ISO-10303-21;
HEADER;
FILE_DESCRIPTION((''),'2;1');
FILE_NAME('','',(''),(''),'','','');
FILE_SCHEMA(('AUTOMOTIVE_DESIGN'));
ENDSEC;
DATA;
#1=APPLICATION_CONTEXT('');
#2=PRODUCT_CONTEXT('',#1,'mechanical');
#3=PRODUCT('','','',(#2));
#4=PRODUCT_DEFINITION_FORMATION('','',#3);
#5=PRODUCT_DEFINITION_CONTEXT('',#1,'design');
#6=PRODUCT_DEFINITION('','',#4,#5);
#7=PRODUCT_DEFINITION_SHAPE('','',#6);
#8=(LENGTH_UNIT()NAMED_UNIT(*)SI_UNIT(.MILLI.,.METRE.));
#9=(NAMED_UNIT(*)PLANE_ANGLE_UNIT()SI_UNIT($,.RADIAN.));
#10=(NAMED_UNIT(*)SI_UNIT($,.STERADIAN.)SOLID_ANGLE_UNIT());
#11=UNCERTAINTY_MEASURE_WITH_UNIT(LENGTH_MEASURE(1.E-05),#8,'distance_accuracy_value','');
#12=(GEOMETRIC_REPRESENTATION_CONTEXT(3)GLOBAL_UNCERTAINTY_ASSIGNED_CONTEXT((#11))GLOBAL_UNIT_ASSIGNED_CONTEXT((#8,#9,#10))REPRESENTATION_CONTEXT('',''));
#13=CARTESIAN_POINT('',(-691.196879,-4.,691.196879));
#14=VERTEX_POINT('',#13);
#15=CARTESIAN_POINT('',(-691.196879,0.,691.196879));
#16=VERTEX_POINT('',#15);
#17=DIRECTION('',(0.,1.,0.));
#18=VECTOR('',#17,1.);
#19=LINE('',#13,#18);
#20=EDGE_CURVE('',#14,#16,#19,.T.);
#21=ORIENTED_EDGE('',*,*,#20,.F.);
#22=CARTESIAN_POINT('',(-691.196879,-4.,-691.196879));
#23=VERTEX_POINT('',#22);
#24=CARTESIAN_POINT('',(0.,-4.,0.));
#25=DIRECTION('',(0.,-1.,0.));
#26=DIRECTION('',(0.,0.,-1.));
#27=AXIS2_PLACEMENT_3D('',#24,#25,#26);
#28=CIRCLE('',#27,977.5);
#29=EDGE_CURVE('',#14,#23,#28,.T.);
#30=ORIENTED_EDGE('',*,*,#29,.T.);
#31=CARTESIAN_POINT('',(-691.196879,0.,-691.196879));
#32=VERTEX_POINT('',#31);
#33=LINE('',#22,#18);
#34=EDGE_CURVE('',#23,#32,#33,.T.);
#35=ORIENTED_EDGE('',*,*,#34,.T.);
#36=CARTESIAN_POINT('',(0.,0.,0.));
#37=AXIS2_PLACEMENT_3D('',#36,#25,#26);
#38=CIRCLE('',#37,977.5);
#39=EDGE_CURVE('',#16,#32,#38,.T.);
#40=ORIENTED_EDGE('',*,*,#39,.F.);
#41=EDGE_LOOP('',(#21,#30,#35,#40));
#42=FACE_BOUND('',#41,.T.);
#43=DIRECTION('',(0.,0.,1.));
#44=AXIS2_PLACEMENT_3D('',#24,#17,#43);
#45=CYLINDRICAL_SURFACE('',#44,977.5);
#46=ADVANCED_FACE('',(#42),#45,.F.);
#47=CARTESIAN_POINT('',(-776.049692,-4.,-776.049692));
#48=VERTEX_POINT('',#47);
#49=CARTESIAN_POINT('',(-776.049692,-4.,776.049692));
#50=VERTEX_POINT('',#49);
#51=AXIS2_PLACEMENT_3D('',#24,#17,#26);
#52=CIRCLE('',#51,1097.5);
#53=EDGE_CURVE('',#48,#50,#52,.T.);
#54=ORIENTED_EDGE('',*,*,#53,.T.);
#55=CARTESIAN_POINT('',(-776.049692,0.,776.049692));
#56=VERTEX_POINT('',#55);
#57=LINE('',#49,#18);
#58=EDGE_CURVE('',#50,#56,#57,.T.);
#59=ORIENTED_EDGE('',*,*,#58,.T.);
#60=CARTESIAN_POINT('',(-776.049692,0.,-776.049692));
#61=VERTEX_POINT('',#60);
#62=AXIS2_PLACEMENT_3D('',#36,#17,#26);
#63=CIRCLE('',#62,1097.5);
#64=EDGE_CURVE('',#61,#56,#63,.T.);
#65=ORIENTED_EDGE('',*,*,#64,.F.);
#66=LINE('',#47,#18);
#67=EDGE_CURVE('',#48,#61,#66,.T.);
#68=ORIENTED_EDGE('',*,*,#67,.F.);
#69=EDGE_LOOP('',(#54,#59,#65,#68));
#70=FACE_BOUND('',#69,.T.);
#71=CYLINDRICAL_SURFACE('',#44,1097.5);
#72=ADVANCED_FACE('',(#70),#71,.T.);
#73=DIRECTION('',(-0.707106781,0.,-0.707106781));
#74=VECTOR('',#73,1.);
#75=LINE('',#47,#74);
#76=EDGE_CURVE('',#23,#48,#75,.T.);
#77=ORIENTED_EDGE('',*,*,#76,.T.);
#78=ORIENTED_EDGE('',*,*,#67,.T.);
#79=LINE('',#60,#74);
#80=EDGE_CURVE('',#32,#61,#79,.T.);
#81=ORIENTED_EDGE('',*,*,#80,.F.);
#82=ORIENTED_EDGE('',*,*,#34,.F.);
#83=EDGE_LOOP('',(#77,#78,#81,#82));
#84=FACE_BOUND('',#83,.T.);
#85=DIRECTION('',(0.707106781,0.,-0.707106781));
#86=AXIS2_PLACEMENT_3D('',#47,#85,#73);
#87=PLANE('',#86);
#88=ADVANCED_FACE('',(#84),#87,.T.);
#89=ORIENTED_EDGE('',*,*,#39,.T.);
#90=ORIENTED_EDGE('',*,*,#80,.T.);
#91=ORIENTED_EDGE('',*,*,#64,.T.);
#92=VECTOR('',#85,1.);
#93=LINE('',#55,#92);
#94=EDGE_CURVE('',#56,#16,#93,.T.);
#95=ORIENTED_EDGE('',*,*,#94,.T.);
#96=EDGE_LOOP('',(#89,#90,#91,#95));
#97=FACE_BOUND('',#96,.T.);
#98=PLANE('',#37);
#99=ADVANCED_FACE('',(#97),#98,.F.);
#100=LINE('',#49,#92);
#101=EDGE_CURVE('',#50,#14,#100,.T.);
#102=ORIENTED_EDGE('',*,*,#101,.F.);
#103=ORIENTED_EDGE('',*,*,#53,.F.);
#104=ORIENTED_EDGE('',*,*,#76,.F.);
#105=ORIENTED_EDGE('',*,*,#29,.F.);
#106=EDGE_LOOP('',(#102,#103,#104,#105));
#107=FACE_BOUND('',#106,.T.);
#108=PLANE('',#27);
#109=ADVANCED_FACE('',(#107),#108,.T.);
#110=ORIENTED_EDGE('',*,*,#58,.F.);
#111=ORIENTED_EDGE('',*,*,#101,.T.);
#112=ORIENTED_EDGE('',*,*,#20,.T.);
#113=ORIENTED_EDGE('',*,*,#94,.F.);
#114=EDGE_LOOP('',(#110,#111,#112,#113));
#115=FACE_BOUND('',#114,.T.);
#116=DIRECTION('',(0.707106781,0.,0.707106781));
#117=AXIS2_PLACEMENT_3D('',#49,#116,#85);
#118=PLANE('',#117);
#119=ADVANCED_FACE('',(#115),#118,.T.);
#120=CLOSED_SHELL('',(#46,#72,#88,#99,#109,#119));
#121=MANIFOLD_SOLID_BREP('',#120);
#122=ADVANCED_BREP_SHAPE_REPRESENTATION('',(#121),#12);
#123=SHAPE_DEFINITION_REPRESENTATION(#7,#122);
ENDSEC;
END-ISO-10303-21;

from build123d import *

# Parameters (mm, degrees)
SM_BASE_FLANGE_1_DEPTH = 4


# Sheet-metal steps are written as plain solids
with BuildPart() as part:
    # Sketch 1 → 基体-法兰1 (new body)
    with BuildSketch(Plane(origin=(0, 0, 0), x_dir=(1, 0, 0), z_dir=(0, 1, 0))):
        with BuildLine():
            Line((-776.049692352, 776.049692352), (-691.19687861, 691.19687861))
            ThreePointArc((-691.19687861, 691.19687861), (-977.5, 0), (-691.19687861, -691.19687861))
            Line((-691.19687861, -691.19687861), (-776.049692352, -776.049692352))
            ThreePointArc((-776.049692352, -776.049692352), (-1097.5, 0), (-776.049692352, 776.049692352))
        make_face()
    extrude(amount=-SM_BASE_FLANGE_1_DEPTH)


solid = part.part
